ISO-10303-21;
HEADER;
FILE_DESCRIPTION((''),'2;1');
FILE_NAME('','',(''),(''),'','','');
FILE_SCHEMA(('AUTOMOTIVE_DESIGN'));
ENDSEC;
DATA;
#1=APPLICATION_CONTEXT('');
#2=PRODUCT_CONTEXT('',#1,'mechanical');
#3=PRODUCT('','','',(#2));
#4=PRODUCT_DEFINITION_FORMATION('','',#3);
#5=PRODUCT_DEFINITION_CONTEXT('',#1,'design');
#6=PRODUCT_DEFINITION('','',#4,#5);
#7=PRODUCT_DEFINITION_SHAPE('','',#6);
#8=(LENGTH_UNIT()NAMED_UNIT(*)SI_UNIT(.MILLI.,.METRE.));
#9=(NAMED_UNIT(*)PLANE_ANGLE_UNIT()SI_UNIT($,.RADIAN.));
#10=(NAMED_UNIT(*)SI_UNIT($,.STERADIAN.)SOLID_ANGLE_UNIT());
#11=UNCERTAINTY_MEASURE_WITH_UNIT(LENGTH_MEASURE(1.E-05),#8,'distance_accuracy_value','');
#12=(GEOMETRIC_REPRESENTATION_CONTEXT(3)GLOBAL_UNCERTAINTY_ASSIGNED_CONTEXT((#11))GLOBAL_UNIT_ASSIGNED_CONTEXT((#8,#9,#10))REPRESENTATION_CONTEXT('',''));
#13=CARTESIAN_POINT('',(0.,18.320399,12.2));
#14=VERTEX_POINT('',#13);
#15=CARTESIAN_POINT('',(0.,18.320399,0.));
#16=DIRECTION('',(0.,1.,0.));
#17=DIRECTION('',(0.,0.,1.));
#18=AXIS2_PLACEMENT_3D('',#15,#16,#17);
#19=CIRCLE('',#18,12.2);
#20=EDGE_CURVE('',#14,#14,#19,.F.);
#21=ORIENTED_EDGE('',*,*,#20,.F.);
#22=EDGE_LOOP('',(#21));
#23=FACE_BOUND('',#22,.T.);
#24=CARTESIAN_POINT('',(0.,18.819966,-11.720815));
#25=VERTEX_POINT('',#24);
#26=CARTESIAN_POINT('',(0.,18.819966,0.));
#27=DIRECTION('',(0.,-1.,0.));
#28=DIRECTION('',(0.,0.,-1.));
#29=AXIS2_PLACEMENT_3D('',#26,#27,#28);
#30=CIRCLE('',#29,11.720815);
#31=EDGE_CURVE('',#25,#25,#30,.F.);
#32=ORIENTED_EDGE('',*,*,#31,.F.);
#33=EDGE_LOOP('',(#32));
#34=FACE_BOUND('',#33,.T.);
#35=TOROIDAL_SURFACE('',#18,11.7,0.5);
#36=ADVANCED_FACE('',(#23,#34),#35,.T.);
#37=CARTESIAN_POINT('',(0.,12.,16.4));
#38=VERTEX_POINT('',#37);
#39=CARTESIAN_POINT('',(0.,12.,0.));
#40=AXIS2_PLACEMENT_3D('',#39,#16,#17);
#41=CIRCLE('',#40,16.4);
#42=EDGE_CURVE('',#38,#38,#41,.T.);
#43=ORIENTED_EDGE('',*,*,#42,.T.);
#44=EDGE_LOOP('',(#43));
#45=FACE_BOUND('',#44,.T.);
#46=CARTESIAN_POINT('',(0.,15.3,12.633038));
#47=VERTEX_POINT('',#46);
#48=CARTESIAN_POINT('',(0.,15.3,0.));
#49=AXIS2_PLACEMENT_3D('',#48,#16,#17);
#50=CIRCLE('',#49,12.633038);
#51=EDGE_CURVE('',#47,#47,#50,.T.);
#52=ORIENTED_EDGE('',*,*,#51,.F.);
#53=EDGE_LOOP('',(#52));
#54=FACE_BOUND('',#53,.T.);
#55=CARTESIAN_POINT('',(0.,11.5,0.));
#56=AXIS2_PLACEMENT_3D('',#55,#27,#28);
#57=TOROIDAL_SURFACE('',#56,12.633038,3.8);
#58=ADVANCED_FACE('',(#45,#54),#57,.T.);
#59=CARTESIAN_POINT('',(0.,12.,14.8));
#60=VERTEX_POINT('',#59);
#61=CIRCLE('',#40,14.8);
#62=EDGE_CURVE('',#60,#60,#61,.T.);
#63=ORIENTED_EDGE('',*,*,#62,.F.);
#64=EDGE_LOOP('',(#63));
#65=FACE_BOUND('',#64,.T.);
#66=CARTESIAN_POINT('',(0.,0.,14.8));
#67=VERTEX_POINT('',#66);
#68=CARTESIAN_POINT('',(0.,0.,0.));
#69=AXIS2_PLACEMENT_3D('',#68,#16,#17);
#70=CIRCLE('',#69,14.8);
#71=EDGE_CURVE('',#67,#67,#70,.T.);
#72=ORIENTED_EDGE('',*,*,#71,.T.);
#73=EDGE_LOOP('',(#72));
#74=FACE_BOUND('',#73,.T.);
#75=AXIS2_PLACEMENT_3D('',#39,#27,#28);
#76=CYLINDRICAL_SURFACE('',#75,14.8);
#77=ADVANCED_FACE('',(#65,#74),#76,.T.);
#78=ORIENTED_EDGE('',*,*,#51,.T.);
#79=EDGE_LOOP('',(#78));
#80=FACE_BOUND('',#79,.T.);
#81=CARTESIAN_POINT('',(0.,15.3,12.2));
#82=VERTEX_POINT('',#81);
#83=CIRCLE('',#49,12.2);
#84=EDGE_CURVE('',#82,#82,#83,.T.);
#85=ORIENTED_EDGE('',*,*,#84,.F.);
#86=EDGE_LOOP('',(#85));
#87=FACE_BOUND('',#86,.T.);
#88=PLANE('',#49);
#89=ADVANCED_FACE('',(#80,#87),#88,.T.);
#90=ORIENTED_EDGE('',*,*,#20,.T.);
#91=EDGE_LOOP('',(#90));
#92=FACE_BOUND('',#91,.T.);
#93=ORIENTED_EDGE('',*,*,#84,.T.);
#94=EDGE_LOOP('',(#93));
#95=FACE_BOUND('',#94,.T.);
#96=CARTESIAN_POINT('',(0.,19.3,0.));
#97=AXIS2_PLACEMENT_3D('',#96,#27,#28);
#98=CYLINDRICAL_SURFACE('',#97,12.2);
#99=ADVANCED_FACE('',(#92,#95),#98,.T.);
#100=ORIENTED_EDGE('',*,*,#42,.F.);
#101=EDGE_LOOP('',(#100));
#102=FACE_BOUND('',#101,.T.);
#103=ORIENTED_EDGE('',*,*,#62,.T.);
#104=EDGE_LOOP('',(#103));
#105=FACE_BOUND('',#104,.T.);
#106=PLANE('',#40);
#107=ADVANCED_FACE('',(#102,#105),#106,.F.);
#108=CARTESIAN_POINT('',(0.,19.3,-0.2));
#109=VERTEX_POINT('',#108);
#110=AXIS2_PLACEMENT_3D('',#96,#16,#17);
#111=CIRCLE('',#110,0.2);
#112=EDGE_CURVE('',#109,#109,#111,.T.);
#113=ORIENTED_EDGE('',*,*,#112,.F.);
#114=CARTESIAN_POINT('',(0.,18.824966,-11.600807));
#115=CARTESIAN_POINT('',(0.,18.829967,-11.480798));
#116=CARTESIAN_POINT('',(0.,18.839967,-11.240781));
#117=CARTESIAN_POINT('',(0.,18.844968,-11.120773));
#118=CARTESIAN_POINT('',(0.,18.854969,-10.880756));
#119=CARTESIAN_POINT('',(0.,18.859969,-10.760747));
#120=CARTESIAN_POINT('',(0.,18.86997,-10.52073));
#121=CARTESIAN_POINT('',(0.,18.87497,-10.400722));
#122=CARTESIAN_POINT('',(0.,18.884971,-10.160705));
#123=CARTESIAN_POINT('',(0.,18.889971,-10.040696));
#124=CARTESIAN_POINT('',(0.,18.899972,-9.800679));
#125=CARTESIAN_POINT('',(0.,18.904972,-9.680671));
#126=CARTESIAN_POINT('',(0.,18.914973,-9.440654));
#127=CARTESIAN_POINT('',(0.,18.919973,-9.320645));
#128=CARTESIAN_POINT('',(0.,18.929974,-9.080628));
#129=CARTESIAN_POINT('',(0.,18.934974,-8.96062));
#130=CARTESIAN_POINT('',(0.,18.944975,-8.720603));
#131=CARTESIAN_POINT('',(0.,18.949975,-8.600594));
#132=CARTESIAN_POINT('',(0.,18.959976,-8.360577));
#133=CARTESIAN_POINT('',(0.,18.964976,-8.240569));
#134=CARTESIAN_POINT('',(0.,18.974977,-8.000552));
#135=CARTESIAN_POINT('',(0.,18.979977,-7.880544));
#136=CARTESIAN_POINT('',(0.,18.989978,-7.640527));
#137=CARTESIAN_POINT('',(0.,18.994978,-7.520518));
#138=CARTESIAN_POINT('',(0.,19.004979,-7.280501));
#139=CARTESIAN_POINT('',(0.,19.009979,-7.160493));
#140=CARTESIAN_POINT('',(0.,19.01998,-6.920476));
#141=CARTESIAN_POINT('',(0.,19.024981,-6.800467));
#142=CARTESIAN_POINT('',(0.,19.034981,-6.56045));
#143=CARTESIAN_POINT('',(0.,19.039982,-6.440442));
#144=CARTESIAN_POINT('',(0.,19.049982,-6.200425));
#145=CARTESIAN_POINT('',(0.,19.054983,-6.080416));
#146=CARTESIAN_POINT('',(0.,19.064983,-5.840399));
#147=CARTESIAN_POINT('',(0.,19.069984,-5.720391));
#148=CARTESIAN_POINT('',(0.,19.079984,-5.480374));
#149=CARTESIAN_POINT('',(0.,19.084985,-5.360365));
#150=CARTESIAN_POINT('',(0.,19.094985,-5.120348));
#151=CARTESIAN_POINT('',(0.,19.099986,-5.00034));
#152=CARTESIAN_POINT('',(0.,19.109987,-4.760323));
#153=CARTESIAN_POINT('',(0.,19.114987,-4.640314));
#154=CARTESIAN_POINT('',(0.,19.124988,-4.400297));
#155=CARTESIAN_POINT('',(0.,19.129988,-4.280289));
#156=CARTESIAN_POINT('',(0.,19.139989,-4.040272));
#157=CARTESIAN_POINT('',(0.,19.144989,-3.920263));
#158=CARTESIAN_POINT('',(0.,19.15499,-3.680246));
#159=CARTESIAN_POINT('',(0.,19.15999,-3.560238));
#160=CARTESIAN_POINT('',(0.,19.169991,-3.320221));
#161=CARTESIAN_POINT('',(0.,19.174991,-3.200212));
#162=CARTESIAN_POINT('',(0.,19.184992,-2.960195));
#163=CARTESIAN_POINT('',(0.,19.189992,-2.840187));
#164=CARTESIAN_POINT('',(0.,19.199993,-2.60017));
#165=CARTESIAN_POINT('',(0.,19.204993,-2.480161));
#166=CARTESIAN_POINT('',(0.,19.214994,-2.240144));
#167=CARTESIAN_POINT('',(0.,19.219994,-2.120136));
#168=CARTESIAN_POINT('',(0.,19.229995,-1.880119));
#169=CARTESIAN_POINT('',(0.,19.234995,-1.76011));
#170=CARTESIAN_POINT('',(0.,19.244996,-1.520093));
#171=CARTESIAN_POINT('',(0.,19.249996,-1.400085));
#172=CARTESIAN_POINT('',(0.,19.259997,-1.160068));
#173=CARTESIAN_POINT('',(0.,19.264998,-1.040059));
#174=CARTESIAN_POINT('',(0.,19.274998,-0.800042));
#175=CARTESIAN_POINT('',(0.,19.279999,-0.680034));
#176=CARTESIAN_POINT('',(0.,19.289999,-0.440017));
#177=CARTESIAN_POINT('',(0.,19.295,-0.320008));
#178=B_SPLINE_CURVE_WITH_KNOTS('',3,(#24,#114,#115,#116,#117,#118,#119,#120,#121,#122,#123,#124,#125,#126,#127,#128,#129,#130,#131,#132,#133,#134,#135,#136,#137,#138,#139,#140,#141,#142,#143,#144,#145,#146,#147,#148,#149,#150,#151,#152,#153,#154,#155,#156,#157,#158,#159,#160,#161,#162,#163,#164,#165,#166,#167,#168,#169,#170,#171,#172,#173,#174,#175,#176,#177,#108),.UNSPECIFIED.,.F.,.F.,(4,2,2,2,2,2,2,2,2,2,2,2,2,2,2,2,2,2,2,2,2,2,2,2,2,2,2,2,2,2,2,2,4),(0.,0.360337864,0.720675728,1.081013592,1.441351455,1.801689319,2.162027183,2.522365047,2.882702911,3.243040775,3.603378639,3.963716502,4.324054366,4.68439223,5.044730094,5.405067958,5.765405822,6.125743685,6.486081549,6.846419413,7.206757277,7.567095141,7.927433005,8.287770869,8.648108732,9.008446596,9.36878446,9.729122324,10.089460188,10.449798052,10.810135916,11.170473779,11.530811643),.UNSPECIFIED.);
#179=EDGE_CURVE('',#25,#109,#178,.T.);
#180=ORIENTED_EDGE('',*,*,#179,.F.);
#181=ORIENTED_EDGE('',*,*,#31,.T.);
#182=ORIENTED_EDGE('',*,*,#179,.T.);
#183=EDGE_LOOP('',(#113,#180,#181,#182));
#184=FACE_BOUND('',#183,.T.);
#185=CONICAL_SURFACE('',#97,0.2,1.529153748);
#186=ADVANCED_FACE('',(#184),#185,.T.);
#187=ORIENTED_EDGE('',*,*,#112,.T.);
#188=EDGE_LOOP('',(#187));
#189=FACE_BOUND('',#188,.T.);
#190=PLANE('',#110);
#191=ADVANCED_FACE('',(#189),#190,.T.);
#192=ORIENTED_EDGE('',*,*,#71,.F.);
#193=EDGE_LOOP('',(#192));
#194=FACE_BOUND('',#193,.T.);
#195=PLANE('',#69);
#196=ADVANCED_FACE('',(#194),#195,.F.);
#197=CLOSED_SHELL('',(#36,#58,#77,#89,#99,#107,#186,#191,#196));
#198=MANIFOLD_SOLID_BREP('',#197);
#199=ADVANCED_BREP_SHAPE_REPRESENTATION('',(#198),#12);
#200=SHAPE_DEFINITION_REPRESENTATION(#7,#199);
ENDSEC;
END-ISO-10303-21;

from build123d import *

# Parameters (mm, degrees)
SKETCH1_R           = 14.8
BOSS_EXTRUDE1_DEPTH = 12
SKETCH2_R           = 16.4
BOSS_EXTRUDE2_DEPTH = 3.3
FILLET1_R           = 3.8
SKETCH3_R           = 12.2
BOSS_EXTRUDE3_DEPTH = 4
CHAMFER1_SIZE       = 0.5
CHAMFER1_SIZE2      = 12
FILLET2_R           = 0.5


with BuildPart() as part:
    # Sketch1 → Boss-Extrude1 (new body)
    with BuildSketch(Plane(origin=(0, 0, 0), x_dir=(1, 0, 0), z_dir=(0, 1, 0))):
        with Locations(Location((0, 0, 0), (0, 0, 270))):
            Circle(SKETCH1_R)
    extrude(amount=BOSS_EXTRUDE1_DEPTH)

    # Sketch2 → Boss-Extrude2 (add)
    with BuildSketch(Plane(origin=(0, 12, 0), x_dir=(1, 0, 0), z_dir=(0, 1, 0))):
        with Locations(Location((0, 0, 0), (0, 0, 270))):
            Circle(SKETCH2_R)
    extrude(amount=BOSS_EXTRUDE2_DEPTH)

    # Fillet1
    # the kernel refuses this fillet: 3.8 mm, written as the material it takes off along each edge
    with BuildSketch(Plane(origin=(0, 15.3, 0), x_dir=(0, 0, 1), z_dir=(-1, 0, 0))) as fillet1_piece_1:
        with BuildLine():
            CenterArc((12.63303836, -3.8), FILLET1_R, 7.560843177, 82.439156823)
            Line((12.63303836, 0), (12.63303836, 0.076))
            Line((12.63303836, 0.076), (16.4, 0.076))
            Line((16.4, 0.076), (16.476, 0))
            ThreePointArc((16.476, 0), (16.476, -1.65), (16.475339233, -3.29))
            Line((16.475339233, -3.29), (16.4, -3.3))
        make_face()
    revolve(axis=Axis((0, 15.3, 0), (0, 1, 0)), mode=Mode.SUBTRACT)

    # Sketch3 → Boss-Extrude3 (add)
    with BuildSketch(Plane(origin=(0, 15.3, 0), x_dir=(1, 0, 0), z_dir=(0, 1, 0))):
        with Locations(Location((0, 0, 0), (0, 0, 270))):
            Circle(SKETCH3_R)
    extrude(amount=BOSS_EXTRUDE3_DEPTH)

    # Chamfer1
    chamfer1_edges = [part.edges().sort_by_distance(p)[0] for p in [
        (0, 19.3, -12.2),
    ]]
    chamfer1_side = [part.faces().sort_by_distance(p)[0] for p in [
        (0, 17.3, -12.2),
    ]]
    chamfer(chamfer1_edges, length=CHAMFER1_SIZE, length2=CHAMFER1_SIZE2, reference=chamfer1_side[0])

    # Fillet2
    fillet2_edges = [part.edges().sort_by_distance(p)[0] for p in [
        (0, 18.8, -12.2),
    ]]
    fillet(fillet2_edges, radius=FILLET2_R)


solid = part.part
